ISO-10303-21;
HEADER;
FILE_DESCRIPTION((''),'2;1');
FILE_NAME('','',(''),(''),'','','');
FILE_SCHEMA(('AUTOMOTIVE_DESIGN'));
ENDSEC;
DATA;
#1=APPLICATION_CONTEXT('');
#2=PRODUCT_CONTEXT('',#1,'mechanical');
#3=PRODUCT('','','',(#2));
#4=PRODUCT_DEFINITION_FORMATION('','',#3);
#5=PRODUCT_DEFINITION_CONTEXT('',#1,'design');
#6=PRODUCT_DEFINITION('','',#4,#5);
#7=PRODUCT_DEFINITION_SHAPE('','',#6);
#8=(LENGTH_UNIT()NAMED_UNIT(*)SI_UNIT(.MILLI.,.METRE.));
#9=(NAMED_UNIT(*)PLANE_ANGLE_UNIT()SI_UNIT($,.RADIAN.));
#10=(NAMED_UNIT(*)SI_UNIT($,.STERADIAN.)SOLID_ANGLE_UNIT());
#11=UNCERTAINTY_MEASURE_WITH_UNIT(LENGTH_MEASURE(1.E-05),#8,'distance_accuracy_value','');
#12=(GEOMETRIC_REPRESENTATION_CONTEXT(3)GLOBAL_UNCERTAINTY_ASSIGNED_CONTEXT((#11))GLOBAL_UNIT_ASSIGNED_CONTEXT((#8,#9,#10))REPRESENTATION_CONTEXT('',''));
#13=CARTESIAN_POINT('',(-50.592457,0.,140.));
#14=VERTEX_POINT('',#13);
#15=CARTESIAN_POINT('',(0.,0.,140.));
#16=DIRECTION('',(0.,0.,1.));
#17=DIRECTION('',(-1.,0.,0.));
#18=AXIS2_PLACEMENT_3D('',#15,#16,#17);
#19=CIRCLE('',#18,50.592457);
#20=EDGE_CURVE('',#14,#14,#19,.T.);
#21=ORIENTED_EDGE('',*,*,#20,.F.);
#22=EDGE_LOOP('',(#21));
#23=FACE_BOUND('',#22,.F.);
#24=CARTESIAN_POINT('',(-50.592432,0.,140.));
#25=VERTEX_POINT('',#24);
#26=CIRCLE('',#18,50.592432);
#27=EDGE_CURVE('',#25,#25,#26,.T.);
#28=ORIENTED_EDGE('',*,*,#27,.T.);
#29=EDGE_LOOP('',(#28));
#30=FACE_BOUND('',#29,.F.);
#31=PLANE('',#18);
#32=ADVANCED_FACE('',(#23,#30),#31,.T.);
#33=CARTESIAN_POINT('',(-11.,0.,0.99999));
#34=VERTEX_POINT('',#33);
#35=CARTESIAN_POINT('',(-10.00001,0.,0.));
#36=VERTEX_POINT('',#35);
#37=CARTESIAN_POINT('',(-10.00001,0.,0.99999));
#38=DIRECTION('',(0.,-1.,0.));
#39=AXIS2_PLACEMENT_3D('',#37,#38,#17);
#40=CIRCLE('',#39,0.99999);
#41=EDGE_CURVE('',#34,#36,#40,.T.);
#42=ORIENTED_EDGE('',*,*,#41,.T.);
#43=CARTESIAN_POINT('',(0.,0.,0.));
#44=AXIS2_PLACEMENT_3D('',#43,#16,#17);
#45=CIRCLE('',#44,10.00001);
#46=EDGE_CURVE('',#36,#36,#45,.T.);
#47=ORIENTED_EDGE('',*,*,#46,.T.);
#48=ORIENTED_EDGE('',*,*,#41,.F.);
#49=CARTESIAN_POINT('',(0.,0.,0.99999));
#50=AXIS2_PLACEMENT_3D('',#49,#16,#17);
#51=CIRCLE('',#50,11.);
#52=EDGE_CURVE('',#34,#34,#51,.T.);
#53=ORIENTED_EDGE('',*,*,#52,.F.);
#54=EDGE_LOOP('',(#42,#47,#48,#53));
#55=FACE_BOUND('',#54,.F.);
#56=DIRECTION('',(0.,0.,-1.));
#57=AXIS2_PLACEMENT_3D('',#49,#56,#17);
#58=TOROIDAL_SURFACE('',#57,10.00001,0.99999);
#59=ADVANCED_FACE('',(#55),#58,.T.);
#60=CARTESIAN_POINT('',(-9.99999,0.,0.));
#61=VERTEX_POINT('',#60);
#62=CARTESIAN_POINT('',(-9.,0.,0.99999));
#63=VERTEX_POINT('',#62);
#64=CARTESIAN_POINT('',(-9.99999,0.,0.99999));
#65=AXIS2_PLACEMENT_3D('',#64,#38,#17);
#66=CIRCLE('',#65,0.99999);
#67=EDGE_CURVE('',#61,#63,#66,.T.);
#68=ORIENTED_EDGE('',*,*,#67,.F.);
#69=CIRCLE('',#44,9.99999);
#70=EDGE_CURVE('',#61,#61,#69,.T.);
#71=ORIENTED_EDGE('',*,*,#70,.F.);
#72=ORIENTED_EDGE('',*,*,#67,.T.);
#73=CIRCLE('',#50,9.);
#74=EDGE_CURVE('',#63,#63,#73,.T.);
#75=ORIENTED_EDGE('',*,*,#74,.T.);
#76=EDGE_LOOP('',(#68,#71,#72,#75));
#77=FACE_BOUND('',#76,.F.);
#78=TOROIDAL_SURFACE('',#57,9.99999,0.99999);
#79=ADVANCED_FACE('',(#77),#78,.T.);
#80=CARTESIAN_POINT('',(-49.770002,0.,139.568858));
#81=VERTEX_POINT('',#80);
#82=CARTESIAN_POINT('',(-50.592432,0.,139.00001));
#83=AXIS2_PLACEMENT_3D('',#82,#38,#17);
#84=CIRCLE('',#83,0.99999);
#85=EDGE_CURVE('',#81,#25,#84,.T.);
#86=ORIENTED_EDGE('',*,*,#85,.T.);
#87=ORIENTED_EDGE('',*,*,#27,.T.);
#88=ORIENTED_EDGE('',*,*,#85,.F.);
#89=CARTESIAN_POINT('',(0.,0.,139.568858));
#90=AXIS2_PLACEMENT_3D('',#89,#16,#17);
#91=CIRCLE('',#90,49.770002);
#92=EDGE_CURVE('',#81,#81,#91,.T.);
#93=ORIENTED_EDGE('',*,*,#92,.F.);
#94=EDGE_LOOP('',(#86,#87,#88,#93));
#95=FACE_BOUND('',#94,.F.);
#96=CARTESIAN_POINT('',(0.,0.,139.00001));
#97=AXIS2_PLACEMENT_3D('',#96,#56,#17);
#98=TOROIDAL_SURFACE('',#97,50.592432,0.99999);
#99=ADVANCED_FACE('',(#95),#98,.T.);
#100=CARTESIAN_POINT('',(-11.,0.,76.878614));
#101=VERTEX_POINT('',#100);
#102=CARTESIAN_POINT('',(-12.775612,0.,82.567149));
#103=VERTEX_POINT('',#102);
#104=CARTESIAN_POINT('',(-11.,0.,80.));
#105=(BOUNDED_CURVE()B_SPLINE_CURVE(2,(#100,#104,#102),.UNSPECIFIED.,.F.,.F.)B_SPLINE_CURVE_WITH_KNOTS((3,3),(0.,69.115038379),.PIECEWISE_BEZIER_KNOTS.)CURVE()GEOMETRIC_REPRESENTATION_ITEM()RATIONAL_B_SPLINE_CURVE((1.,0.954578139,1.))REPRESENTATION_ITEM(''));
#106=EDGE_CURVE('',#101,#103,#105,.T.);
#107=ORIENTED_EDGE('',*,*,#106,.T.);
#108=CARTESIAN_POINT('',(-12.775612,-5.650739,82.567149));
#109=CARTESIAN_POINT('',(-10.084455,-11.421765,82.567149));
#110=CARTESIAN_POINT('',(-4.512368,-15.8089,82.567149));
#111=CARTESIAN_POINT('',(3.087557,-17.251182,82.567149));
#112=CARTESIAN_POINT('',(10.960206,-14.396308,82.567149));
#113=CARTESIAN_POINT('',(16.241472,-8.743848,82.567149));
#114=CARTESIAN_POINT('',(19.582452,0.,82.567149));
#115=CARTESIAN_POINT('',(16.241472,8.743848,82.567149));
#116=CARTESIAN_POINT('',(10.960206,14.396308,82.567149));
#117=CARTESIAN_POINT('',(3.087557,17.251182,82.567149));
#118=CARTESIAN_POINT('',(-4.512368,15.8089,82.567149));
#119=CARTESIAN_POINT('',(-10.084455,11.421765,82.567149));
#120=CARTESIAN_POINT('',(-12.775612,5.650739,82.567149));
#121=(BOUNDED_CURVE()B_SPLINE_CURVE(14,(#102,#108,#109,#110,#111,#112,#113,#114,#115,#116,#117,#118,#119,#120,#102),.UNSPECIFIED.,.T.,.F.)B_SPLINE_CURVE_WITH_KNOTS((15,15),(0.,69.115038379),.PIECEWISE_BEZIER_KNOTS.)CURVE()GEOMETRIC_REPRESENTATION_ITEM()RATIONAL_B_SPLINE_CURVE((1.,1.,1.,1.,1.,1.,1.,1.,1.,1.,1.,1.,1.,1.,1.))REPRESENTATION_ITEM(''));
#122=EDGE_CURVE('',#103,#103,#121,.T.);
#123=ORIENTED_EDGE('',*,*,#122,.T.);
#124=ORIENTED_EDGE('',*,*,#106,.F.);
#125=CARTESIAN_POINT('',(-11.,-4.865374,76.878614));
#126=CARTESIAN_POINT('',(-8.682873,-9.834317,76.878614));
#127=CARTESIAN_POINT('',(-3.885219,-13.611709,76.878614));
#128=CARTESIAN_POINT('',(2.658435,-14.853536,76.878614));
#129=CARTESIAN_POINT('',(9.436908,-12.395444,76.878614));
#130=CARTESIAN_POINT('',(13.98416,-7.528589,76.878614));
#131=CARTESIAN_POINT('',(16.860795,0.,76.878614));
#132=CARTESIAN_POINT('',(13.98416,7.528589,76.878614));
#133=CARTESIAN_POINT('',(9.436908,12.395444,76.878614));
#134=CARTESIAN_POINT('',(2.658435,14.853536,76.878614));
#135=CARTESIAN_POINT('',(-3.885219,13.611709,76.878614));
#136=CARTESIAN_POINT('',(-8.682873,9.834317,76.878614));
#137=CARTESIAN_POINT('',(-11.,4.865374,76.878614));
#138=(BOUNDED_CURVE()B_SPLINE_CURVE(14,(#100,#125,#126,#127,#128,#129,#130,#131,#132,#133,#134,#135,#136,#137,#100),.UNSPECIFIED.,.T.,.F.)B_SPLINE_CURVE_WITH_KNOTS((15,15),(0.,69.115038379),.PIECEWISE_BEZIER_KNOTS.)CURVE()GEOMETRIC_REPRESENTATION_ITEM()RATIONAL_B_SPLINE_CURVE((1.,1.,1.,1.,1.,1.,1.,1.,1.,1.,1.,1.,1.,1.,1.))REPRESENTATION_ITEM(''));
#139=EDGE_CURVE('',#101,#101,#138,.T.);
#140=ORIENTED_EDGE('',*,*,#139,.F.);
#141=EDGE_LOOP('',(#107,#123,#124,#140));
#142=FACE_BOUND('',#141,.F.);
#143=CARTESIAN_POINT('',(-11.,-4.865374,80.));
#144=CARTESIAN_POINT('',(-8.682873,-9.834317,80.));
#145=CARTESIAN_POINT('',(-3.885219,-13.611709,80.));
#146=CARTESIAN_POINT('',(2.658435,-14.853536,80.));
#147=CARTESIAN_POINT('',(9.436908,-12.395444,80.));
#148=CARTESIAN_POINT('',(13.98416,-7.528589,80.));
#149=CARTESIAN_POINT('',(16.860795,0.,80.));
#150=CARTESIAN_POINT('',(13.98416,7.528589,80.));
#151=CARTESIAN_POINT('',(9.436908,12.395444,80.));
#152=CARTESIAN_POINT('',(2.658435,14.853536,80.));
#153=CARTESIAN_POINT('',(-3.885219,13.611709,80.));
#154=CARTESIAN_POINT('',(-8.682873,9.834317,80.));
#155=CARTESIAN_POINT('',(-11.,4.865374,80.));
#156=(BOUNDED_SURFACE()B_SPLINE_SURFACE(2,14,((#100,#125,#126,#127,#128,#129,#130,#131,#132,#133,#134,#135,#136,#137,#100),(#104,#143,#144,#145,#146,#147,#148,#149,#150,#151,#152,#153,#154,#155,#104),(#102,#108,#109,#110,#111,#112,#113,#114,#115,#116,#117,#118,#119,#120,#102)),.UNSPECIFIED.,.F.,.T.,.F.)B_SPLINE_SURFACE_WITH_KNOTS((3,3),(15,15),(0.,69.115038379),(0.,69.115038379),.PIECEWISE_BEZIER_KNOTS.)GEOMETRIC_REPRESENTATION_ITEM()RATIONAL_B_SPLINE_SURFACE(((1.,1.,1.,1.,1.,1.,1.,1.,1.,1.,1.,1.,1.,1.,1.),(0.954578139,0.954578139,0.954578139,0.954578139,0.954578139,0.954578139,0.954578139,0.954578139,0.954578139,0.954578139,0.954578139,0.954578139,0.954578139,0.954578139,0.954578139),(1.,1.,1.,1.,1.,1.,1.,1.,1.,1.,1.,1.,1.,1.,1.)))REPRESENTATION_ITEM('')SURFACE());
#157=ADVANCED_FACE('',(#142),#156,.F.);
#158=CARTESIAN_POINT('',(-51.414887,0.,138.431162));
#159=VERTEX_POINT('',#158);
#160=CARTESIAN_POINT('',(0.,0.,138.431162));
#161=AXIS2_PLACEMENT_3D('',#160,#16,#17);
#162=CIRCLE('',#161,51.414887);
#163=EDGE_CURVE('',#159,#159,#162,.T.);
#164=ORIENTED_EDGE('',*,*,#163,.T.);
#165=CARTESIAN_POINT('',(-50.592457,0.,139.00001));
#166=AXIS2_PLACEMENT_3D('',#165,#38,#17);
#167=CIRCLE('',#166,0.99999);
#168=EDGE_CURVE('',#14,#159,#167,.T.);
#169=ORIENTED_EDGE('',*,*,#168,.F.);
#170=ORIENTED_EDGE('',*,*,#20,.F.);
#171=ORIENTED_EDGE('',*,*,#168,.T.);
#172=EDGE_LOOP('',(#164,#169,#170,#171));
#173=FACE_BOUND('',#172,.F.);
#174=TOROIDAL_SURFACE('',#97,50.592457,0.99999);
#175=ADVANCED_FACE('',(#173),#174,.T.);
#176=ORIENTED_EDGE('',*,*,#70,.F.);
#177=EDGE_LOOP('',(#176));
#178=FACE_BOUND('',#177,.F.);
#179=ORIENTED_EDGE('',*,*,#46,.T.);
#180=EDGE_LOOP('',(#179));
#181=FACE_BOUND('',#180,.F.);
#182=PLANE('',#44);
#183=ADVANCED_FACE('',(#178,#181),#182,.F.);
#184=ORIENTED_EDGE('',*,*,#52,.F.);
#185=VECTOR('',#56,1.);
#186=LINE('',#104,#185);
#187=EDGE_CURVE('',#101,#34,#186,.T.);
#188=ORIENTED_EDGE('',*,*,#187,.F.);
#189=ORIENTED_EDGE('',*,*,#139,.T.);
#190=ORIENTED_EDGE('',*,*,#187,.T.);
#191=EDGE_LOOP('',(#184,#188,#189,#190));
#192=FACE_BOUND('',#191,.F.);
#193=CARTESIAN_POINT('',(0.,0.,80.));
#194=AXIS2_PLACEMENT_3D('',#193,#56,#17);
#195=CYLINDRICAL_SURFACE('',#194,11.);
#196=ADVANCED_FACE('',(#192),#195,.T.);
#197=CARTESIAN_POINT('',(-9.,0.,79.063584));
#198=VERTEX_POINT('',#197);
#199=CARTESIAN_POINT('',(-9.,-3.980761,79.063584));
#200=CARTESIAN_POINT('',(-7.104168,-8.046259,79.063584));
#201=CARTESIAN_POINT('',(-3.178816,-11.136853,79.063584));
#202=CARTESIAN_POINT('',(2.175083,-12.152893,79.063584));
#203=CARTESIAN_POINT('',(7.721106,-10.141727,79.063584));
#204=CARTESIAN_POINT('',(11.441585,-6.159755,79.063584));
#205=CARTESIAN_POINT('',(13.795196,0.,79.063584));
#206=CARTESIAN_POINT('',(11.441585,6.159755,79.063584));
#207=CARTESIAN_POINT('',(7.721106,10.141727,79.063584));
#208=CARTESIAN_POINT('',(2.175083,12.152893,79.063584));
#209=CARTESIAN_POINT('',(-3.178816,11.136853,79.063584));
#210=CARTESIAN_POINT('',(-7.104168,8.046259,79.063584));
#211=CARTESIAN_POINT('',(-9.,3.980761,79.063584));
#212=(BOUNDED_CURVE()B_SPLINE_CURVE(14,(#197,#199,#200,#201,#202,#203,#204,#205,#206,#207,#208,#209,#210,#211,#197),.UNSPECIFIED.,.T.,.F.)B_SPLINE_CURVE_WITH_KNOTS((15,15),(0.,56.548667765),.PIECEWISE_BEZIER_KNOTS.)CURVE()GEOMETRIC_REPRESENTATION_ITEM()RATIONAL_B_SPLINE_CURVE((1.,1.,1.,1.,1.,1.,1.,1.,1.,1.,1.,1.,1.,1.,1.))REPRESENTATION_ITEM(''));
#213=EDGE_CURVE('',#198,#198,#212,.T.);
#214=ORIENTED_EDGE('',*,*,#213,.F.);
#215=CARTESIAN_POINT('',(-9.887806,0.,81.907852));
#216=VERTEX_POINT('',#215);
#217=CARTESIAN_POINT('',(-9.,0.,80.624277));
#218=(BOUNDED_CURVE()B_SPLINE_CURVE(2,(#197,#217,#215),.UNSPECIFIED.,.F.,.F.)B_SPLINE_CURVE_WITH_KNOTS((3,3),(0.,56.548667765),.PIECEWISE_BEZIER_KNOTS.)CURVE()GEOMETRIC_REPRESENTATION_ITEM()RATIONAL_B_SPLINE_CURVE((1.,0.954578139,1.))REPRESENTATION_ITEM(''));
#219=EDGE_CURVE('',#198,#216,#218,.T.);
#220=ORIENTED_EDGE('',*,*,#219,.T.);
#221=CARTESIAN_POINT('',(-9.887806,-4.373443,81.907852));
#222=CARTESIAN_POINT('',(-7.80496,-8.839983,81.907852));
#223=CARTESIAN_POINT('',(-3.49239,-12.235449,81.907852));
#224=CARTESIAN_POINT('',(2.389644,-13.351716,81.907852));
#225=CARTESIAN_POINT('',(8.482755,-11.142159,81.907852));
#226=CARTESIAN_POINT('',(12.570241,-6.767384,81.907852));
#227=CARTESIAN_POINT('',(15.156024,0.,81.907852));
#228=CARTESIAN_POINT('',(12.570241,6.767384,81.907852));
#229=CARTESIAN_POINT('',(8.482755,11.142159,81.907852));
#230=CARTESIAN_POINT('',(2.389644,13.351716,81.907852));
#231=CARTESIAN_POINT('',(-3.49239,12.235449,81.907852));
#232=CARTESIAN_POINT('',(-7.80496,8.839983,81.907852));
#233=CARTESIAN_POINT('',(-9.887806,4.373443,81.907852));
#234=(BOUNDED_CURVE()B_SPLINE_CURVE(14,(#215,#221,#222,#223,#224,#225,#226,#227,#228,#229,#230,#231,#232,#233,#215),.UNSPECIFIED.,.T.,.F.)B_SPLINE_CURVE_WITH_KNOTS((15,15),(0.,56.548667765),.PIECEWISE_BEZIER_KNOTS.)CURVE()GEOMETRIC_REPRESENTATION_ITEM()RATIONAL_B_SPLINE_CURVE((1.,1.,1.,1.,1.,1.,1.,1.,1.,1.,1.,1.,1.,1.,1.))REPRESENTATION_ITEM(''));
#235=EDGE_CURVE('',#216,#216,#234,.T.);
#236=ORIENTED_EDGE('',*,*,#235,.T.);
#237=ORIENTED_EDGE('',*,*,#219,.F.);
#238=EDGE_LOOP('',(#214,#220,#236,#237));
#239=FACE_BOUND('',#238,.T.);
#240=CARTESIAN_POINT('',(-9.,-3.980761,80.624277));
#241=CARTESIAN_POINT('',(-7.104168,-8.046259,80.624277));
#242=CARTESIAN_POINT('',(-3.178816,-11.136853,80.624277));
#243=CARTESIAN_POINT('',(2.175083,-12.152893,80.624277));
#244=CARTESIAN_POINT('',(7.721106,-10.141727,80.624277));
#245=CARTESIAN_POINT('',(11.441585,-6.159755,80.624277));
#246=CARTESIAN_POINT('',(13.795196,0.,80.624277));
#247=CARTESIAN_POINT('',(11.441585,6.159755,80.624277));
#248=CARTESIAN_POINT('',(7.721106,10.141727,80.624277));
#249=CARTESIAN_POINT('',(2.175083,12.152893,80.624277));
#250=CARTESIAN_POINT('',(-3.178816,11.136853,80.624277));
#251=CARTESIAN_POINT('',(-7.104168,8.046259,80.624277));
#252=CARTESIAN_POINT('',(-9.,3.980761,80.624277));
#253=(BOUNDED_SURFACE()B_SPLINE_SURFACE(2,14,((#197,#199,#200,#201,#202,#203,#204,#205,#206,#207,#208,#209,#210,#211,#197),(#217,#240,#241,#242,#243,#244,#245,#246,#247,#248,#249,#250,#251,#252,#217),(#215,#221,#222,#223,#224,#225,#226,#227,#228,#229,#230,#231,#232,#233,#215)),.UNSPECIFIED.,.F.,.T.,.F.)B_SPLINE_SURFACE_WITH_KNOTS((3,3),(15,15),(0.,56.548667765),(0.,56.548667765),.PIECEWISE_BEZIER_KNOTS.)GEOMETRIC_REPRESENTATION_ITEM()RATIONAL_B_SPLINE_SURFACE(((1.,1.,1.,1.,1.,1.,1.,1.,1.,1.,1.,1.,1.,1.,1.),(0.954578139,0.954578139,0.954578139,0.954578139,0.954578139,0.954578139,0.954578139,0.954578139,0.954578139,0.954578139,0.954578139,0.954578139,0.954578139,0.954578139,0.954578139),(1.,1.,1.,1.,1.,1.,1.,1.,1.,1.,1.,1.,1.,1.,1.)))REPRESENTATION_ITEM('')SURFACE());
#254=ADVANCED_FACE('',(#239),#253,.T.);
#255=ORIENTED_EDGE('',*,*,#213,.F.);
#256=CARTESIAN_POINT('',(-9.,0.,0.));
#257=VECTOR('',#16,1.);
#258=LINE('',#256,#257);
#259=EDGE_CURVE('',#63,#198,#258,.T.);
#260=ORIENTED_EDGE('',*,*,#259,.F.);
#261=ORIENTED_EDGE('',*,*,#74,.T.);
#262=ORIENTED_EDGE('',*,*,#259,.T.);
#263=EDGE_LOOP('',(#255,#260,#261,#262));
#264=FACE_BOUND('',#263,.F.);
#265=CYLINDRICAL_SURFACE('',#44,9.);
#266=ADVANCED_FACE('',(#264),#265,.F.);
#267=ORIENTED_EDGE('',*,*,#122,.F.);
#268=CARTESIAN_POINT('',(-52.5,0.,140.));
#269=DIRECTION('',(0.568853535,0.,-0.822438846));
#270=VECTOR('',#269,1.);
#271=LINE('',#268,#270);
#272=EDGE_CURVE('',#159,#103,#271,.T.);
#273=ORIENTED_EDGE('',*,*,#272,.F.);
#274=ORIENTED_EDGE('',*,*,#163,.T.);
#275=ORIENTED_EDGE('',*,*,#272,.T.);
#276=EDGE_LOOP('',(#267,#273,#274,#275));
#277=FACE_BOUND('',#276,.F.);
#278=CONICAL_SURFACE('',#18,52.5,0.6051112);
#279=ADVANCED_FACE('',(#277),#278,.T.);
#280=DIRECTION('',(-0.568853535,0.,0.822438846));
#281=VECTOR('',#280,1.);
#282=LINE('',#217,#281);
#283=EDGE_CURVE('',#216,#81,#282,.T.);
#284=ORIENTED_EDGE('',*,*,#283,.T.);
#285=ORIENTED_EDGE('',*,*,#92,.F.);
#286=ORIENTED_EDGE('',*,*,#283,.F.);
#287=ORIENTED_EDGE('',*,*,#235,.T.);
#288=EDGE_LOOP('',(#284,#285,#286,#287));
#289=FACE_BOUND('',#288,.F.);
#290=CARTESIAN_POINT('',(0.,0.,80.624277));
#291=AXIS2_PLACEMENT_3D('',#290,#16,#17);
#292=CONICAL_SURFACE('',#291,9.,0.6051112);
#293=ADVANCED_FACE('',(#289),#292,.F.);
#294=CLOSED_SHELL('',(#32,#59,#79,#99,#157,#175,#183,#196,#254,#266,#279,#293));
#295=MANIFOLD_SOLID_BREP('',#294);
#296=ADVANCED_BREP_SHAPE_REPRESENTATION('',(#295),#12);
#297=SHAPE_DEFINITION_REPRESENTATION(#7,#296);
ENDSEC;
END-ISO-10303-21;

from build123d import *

# Parameters (mm, degrees)
F2_R = 0.99999
F3_R = 5
F4_R = 10


# Not quite as in the source:
# - a fillet or chamfer is up to 0.001 mm smaller than in the source, because OpenCascade refuses the exact size


with BuildPart() as f1:
    # F0 (on Front) → F1 (revolve)
    with BuildSketch(Plane.XZ):
        Polygon((-11, 80), (-11, 0), (-9, 0), (-9, 80.6242772277), (-50.0682082509, 140), (-52.5, 140), align=None)
    revolve(axis=Axis((0, 0, 40), (0, 0, 1)))

    # F2 (radius 1 in the source; OpenCascade refuses exactly that, so slightly less here)
    f2_edges = [f1.edges().sort_by_distance(p)[0] for p in [
        (52.5, 0, 140),
        (50.068208, 0, 140),
        (11, 0, 0),
        (9, 0, 0),
    ]]
    fillet(f2_edges, radius=F2_R)

    # F3
    f3_edges = [f1.edges().sort_by_distance(p)[0] for p in [
        (9, 0, 80.624277),
    ]]
    fillet(f3_edges, radius=F3_R)

    # F4
    f4_edges = [f1.edges().sort_by_distance(p)[0] for p in [
        (11, 0, 80),
    ]]
    fillet(f4_edges, radius=F4_R)


solid = f1.part
